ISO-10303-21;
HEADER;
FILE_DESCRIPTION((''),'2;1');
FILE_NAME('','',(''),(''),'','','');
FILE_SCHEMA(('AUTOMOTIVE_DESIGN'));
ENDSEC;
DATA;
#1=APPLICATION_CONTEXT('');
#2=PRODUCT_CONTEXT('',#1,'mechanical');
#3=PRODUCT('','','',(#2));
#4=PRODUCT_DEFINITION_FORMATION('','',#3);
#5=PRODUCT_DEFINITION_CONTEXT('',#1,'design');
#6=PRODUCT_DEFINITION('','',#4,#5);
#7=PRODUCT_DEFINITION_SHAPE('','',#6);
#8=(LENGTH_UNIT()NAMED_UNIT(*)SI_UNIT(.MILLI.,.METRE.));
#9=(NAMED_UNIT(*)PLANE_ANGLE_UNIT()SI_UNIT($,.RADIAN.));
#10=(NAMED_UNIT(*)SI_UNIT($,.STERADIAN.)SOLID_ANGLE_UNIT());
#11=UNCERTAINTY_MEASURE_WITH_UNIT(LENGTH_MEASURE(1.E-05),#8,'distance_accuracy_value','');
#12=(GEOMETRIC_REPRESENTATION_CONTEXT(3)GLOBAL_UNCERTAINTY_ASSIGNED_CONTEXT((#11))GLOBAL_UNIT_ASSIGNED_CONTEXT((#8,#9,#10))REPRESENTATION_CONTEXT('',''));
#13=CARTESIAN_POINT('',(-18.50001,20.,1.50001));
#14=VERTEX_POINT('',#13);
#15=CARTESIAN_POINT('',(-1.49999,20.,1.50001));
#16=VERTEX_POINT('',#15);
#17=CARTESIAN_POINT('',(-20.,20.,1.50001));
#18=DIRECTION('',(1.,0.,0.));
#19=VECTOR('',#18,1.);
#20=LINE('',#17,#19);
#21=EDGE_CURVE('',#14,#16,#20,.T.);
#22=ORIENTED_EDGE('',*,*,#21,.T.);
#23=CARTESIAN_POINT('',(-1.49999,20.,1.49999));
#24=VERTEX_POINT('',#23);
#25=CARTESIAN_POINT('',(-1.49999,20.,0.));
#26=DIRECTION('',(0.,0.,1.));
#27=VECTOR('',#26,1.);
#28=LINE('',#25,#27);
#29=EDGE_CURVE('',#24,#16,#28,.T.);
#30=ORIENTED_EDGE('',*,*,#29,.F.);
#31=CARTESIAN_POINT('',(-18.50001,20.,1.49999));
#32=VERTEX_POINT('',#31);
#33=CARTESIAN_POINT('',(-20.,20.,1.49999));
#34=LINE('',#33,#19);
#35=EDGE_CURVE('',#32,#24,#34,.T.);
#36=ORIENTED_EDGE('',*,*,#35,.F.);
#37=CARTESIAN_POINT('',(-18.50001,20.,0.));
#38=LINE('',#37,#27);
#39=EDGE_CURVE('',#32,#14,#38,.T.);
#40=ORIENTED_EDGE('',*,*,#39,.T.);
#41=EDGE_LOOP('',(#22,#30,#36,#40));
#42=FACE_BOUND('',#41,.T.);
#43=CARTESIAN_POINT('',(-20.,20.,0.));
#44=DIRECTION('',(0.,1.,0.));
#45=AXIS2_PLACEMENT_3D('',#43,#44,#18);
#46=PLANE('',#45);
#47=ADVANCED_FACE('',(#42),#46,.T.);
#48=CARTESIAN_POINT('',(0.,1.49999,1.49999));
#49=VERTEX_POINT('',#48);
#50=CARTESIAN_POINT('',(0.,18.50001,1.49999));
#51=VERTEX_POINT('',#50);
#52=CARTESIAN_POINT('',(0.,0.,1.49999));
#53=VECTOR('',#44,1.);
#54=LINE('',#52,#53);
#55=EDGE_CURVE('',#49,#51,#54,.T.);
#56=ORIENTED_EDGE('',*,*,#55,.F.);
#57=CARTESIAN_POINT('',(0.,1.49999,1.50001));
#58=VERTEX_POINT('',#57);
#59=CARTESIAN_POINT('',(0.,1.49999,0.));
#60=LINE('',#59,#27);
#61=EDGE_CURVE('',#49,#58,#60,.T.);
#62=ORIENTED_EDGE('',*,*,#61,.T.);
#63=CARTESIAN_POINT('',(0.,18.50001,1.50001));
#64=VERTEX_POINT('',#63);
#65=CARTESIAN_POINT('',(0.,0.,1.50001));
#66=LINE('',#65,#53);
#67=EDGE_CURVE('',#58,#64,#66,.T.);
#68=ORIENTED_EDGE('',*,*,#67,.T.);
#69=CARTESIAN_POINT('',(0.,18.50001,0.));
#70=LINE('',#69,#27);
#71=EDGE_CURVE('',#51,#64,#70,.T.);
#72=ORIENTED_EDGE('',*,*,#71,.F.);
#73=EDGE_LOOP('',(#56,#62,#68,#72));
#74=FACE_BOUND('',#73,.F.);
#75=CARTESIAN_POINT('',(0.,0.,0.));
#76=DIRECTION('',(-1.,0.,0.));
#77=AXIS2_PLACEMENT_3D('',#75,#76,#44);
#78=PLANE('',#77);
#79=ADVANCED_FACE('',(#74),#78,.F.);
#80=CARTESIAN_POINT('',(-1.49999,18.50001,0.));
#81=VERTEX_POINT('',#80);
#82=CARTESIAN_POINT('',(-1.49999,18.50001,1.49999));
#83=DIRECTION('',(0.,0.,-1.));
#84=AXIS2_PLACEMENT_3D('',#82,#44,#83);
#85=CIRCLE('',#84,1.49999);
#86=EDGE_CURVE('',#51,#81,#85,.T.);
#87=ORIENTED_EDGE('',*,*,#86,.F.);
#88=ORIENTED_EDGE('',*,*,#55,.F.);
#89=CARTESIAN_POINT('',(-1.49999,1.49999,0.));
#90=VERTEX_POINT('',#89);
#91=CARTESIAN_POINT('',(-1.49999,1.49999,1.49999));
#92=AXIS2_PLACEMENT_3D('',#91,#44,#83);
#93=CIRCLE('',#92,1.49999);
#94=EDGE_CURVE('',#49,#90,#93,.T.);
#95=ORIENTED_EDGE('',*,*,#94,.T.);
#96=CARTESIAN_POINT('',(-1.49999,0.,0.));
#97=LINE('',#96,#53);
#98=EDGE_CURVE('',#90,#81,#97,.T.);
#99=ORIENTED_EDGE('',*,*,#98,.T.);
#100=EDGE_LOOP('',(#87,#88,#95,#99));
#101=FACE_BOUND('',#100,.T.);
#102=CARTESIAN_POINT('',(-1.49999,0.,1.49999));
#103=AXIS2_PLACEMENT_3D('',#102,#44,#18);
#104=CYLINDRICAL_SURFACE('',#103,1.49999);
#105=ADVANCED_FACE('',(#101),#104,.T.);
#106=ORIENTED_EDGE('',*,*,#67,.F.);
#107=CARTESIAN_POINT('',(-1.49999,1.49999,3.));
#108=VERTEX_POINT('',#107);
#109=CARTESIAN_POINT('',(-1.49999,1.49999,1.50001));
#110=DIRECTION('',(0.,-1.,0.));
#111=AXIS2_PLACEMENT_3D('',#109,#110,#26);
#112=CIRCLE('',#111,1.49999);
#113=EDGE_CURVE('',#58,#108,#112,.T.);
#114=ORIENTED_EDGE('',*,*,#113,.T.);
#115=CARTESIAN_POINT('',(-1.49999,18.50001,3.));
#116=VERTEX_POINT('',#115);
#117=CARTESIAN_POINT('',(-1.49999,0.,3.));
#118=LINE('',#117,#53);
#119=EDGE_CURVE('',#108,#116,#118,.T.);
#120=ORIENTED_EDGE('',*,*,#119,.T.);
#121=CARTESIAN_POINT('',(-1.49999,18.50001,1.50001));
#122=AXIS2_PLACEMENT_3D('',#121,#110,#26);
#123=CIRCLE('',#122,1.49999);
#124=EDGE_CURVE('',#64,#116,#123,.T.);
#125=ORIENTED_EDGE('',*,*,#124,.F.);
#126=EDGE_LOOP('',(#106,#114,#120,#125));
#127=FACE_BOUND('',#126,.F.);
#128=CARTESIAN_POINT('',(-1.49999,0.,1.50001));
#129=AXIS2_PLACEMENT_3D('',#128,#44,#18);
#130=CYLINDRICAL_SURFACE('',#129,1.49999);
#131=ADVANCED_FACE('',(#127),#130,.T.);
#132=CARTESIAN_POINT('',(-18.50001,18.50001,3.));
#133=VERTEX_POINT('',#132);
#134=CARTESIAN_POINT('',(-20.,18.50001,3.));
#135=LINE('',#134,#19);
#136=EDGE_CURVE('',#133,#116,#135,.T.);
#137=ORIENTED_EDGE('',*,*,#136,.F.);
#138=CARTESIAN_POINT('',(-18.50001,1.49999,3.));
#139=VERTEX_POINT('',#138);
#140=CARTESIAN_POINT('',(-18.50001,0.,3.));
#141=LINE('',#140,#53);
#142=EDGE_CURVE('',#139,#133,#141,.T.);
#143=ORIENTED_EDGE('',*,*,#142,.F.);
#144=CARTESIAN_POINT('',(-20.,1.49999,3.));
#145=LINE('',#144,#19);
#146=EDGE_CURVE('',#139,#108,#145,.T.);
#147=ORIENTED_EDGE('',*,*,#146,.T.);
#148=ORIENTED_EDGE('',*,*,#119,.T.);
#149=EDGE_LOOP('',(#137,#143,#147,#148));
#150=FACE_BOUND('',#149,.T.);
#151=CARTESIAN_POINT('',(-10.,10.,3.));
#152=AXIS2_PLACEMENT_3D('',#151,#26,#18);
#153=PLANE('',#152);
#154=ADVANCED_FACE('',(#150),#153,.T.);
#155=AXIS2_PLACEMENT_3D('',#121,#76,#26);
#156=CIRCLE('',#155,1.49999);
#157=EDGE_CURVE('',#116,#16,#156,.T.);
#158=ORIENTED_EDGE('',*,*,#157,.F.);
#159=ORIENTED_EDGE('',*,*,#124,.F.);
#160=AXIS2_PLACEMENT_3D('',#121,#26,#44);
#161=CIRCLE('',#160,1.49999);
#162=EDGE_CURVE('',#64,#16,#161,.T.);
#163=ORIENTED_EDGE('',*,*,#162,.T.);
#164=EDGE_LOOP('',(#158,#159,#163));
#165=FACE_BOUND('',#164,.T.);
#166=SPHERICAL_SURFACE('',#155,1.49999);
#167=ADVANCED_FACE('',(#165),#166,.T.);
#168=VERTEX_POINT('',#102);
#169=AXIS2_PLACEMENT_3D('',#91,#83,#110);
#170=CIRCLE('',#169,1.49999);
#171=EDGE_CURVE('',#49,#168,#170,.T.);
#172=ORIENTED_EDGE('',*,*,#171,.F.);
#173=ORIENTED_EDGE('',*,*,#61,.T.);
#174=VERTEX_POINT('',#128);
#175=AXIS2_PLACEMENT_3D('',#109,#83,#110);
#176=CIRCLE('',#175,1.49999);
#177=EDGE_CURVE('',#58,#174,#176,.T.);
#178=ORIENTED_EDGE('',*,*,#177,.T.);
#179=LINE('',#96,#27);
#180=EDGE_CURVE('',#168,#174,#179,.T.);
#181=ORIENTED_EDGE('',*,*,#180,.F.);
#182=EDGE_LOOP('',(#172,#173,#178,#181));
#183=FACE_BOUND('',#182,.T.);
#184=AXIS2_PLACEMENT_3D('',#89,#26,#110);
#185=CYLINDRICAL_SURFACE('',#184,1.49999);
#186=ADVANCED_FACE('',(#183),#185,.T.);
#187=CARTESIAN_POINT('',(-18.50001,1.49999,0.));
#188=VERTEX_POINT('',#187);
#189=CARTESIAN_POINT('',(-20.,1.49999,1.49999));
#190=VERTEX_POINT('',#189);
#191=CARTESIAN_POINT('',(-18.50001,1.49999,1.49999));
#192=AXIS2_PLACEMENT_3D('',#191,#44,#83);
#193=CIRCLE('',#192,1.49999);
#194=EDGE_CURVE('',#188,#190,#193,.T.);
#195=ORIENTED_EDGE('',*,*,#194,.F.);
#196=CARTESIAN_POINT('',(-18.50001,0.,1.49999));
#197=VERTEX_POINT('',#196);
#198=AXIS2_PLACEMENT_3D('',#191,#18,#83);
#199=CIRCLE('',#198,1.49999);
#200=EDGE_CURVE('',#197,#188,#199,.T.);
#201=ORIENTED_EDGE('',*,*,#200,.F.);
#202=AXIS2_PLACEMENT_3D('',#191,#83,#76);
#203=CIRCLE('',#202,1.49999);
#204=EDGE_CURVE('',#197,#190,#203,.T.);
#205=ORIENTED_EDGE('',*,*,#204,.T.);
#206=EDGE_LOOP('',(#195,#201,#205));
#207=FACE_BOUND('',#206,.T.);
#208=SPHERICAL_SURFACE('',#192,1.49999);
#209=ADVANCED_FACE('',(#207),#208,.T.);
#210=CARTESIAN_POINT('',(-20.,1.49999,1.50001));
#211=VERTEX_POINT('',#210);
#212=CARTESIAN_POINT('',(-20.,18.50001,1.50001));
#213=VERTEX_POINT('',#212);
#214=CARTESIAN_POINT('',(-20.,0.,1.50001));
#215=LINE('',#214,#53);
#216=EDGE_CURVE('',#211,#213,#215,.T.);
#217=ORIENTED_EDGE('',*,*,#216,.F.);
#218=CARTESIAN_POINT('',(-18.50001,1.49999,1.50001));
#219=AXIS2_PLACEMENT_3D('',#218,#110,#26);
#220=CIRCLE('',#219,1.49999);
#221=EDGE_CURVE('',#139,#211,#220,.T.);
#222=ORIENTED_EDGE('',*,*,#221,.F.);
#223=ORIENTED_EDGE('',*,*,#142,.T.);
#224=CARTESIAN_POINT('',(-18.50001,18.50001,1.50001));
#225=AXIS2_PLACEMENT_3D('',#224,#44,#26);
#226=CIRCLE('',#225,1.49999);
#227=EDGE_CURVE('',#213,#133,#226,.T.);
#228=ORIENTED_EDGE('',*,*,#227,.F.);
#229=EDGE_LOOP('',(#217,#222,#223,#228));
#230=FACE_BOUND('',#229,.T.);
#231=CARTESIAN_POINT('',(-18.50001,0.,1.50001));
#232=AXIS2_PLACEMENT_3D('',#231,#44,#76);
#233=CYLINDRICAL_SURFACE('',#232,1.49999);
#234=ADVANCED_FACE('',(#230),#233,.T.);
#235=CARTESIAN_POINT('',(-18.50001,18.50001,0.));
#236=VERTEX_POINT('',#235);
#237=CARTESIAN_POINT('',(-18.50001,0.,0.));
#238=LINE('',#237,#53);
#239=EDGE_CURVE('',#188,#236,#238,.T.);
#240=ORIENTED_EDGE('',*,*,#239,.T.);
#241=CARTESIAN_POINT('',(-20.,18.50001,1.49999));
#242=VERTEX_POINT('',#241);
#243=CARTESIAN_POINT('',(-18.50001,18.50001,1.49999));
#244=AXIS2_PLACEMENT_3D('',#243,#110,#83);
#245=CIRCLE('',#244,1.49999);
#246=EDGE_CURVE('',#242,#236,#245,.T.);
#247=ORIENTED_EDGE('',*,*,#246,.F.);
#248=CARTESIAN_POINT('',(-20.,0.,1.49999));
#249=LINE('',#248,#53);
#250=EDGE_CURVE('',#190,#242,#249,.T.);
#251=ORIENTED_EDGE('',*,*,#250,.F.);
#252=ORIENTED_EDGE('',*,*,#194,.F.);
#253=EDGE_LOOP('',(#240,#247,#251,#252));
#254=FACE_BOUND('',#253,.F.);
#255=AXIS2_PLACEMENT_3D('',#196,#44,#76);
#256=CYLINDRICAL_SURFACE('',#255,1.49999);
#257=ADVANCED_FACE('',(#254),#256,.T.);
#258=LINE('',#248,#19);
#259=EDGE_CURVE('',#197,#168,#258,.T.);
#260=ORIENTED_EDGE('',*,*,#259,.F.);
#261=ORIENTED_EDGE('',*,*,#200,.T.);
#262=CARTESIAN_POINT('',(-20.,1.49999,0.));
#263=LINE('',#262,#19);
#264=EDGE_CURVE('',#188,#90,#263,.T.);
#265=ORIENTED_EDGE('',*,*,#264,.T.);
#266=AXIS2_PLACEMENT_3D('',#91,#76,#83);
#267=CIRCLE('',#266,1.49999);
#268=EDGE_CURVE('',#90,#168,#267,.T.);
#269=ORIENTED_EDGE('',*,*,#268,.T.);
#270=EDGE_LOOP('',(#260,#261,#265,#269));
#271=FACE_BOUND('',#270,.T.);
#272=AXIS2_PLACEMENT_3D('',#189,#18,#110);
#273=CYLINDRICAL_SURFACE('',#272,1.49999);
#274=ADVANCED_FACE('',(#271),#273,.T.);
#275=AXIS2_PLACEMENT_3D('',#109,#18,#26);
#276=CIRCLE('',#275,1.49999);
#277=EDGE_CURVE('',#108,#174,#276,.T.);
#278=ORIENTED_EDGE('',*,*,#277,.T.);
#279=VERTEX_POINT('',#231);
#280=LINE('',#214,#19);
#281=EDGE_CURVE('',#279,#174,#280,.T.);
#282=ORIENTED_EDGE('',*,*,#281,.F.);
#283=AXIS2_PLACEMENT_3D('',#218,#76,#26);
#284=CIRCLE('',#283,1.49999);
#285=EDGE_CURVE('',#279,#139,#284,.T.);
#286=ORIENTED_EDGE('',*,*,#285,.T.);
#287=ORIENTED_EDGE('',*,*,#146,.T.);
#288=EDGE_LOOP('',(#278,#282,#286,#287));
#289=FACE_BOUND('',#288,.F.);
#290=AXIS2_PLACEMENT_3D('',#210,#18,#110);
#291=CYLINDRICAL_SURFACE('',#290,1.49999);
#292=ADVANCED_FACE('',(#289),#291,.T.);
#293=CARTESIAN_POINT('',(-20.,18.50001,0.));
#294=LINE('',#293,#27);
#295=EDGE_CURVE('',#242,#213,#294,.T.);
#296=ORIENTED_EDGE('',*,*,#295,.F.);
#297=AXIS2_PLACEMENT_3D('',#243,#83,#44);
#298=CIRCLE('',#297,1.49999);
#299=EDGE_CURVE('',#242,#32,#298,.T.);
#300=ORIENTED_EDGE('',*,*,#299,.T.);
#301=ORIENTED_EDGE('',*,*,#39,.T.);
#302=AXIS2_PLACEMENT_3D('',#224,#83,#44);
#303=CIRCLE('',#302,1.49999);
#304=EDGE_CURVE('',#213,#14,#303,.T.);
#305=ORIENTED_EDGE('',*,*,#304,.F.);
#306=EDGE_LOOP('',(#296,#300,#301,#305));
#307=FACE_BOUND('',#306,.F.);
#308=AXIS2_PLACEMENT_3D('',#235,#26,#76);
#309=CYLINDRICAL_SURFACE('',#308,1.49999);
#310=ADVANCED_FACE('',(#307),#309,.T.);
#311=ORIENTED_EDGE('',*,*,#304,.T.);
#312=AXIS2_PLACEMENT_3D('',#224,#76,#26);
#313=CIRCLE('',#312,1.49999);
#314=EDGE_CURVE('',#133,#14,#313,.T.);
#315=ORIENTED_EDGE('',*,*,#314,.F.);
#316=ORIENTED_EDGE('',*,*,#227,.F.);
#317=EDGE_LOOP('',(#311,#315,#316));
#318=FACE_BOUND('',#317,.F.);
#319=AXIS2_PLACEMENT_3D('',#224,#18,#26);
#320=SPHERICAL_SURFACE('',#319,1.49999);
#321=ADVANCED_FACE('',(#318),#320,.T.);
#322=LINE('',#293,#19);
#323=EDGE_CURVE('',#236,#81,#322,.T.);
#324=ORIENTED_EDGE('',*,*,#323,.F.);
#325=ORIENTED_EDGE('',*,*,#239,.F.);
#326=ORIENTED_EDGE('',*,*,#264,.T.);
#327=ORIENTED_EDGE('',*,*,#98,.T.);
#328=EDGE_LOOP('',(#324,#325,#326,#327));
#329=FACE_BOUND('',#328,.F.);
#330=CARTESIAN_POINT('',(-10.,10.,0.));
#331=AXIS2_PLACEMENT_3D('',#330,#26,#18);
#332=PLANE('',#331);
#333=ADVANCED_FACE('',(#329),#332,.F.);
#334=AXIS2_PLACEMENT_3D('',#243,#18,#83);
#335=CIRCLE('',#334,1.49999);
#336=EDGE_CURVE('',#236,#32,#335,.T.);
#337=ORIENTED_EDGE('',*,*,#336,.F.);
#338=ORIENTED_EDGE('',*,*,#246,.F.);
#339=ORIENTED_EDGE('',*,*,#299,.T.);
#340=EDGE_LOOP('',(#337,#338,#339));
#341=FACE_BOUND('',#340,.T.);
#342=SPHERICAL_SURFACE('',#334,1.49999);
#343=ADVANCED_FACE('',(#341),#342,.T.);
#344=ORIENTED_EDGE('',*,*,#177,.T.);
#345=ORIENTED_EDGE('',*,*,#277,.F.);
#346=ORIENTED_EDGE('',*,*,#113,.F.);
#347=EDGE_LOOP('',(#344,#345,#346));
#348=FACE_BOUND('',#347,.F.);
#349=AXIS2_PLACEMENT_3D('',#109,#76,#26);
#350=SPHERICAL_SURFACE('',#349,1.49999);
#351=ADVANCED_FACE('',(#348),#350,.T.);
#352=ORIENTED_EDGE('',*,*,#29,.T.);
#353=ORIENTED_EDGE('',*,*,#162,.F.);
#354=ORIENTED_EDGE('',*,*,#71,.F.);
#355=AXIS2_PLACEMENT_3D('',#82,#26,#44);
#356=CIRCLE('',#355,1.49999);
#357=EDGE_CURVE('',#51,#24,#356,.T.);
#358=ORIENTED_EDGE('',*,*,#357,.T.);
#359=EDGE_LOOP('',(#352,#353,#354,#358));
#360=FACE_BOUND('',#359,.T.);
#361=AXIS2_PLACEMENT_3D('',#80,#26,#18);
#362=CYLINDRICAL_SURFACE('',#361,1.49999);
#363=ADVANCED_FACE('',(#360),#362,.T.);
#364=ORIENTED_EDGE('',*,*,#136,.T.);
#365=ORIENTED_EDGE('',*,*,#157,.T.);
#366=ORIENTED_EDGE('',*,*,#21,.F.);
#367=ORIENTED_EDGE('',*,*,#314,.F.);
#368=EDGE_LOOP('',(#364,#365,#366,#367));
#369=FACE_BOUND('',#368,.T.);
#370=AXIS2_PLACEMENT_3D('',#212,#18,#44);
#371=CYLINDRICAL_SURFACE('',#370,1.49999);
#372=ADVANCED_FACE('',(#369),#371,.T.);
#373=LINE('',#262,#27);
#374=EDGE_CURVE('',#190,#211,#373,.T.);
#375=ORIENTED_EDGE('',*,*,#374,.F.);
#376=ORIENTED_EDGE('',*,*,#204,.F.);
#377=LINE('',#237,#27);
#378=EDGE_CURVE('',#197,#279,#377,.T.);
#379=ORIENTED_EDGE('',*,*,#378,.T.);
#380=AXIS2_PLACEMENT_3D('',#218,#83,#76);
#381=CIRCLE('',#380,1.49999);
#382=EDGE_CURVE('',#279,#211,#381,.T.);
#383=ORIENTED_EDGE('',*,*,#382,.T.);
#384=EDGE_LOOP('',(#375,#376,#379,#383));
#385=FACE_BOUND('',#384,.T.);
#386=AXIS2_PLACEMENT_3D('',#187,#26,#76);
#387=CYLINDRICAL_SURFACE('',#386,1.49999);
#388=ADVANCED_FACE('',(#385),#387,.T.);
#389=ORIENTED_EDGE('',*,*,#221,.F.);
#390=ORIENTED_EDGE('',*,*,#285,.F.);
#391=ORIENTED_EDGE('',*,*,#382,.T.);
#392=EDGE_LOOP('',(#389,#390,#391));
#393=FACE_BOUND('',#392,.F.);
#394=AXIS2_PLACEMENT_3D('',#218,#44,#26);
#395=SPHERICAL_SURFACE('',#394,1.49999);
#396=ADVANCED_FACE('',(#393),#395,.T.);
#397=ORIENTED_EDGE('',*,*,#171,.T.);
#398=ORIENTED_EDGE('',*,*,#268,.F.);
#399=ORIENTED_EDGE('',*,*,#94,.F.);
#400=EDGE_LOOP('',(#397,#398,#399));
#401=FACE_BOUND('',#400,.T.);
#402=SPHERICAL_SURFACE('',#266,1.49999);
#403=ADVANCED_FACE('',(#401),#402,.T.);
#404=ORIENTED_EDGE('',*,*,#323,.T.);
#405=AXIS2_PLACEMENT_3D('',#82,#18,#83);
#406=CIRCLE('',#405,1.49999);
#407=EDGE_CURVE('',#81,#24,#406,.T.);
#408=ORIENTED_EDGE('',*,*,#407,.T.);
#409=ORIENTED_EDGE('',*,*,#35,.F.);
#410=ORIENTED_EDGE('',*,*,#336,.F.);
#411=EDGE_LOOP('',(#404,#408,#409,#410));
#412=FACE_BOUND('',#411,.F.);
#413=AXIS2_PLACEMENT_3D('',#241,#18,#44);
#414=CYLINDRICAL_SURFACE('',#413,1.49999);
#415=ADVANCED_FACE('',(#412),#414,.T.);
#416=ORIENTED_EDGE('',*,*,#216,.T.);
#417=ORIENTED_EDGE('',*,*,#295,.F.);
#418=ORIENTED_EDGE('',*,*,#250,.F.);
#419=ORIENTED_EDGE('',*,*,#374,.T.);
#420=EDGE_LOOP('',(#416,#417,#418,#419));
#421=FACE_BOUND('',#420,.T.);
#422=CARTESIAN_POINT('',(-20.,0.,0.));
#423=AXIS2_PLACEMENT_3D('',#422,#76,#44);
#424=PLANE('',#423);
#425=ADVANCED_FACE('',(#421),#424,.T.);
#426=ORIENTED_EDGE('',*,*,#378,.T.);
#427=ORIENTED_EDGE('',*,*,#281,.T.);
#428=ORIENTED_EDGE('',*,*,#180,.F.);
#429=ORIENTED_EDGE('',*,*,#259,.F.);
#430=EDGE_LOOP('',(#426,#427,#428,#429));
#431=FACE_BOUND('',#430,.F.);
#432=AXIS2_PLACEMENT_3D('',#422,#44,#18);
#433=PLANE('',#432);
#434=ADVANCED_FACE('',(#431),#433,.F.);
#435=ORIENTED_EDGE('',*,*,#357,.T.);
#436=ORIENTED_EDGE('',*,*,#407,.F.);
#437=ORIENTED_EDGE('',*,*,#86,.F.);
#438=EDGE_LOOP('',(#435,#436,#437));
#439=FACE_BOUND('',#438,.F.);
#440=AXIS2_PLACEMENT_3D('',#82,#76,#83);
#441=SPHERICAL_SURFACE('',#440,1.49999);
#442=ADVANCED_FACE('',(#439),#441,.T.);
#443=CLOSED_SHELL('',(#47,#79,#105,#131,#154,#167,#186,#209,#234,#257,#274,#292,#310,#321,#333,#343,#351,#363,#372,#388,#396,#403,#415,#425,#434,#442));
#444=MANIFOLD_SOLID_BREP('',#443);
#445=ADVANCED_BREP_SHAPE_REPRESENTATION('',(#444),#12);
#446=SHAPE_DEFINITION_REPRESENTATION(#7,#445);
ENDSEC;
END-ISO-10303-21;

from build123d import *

# Parameters (mm, degrees)
F0_W     = 20
F0_H     = 20
F1_DEPTH = 3
F2_R     = 1.49999


# Not quite as in the source:
# - a fillet or chamfer is up to 0.001 mm smaller than in the source, because OpenCascade refuses the exact size


with BuildPart() as f1:
    # F0 (on Top) → F1 (new body)
    with BuildSketch(Plane.XY):
        with Locations((-10, 10)):
            Rectangle(F0_W, F0_H)
    extrude(amount=F1_DEPTH)

    # F2 (radius 1.5 in the source; OpenCascade refuses exactly that, so slightly less here)
    f2_edges = [f1.edges().sort_by_distance(p)[0] for p in [
        (-10, 20, 3),
        (-20, 10, 3),
        (-10, 0, 3),
        (0, 10, 3),
        (-10, 20, 0),
        (-20, 10, 0),
        (-10, 0, 0),
        (0, 10, 0),
        (-20, 0, 1.5),
        (0, 0, 1.5),
        (-20, 20, 1.5),
        (0, 20, 1.5),
    ]]
    fillet(f2_edges, radius=F2_R)


solid = f1.part
